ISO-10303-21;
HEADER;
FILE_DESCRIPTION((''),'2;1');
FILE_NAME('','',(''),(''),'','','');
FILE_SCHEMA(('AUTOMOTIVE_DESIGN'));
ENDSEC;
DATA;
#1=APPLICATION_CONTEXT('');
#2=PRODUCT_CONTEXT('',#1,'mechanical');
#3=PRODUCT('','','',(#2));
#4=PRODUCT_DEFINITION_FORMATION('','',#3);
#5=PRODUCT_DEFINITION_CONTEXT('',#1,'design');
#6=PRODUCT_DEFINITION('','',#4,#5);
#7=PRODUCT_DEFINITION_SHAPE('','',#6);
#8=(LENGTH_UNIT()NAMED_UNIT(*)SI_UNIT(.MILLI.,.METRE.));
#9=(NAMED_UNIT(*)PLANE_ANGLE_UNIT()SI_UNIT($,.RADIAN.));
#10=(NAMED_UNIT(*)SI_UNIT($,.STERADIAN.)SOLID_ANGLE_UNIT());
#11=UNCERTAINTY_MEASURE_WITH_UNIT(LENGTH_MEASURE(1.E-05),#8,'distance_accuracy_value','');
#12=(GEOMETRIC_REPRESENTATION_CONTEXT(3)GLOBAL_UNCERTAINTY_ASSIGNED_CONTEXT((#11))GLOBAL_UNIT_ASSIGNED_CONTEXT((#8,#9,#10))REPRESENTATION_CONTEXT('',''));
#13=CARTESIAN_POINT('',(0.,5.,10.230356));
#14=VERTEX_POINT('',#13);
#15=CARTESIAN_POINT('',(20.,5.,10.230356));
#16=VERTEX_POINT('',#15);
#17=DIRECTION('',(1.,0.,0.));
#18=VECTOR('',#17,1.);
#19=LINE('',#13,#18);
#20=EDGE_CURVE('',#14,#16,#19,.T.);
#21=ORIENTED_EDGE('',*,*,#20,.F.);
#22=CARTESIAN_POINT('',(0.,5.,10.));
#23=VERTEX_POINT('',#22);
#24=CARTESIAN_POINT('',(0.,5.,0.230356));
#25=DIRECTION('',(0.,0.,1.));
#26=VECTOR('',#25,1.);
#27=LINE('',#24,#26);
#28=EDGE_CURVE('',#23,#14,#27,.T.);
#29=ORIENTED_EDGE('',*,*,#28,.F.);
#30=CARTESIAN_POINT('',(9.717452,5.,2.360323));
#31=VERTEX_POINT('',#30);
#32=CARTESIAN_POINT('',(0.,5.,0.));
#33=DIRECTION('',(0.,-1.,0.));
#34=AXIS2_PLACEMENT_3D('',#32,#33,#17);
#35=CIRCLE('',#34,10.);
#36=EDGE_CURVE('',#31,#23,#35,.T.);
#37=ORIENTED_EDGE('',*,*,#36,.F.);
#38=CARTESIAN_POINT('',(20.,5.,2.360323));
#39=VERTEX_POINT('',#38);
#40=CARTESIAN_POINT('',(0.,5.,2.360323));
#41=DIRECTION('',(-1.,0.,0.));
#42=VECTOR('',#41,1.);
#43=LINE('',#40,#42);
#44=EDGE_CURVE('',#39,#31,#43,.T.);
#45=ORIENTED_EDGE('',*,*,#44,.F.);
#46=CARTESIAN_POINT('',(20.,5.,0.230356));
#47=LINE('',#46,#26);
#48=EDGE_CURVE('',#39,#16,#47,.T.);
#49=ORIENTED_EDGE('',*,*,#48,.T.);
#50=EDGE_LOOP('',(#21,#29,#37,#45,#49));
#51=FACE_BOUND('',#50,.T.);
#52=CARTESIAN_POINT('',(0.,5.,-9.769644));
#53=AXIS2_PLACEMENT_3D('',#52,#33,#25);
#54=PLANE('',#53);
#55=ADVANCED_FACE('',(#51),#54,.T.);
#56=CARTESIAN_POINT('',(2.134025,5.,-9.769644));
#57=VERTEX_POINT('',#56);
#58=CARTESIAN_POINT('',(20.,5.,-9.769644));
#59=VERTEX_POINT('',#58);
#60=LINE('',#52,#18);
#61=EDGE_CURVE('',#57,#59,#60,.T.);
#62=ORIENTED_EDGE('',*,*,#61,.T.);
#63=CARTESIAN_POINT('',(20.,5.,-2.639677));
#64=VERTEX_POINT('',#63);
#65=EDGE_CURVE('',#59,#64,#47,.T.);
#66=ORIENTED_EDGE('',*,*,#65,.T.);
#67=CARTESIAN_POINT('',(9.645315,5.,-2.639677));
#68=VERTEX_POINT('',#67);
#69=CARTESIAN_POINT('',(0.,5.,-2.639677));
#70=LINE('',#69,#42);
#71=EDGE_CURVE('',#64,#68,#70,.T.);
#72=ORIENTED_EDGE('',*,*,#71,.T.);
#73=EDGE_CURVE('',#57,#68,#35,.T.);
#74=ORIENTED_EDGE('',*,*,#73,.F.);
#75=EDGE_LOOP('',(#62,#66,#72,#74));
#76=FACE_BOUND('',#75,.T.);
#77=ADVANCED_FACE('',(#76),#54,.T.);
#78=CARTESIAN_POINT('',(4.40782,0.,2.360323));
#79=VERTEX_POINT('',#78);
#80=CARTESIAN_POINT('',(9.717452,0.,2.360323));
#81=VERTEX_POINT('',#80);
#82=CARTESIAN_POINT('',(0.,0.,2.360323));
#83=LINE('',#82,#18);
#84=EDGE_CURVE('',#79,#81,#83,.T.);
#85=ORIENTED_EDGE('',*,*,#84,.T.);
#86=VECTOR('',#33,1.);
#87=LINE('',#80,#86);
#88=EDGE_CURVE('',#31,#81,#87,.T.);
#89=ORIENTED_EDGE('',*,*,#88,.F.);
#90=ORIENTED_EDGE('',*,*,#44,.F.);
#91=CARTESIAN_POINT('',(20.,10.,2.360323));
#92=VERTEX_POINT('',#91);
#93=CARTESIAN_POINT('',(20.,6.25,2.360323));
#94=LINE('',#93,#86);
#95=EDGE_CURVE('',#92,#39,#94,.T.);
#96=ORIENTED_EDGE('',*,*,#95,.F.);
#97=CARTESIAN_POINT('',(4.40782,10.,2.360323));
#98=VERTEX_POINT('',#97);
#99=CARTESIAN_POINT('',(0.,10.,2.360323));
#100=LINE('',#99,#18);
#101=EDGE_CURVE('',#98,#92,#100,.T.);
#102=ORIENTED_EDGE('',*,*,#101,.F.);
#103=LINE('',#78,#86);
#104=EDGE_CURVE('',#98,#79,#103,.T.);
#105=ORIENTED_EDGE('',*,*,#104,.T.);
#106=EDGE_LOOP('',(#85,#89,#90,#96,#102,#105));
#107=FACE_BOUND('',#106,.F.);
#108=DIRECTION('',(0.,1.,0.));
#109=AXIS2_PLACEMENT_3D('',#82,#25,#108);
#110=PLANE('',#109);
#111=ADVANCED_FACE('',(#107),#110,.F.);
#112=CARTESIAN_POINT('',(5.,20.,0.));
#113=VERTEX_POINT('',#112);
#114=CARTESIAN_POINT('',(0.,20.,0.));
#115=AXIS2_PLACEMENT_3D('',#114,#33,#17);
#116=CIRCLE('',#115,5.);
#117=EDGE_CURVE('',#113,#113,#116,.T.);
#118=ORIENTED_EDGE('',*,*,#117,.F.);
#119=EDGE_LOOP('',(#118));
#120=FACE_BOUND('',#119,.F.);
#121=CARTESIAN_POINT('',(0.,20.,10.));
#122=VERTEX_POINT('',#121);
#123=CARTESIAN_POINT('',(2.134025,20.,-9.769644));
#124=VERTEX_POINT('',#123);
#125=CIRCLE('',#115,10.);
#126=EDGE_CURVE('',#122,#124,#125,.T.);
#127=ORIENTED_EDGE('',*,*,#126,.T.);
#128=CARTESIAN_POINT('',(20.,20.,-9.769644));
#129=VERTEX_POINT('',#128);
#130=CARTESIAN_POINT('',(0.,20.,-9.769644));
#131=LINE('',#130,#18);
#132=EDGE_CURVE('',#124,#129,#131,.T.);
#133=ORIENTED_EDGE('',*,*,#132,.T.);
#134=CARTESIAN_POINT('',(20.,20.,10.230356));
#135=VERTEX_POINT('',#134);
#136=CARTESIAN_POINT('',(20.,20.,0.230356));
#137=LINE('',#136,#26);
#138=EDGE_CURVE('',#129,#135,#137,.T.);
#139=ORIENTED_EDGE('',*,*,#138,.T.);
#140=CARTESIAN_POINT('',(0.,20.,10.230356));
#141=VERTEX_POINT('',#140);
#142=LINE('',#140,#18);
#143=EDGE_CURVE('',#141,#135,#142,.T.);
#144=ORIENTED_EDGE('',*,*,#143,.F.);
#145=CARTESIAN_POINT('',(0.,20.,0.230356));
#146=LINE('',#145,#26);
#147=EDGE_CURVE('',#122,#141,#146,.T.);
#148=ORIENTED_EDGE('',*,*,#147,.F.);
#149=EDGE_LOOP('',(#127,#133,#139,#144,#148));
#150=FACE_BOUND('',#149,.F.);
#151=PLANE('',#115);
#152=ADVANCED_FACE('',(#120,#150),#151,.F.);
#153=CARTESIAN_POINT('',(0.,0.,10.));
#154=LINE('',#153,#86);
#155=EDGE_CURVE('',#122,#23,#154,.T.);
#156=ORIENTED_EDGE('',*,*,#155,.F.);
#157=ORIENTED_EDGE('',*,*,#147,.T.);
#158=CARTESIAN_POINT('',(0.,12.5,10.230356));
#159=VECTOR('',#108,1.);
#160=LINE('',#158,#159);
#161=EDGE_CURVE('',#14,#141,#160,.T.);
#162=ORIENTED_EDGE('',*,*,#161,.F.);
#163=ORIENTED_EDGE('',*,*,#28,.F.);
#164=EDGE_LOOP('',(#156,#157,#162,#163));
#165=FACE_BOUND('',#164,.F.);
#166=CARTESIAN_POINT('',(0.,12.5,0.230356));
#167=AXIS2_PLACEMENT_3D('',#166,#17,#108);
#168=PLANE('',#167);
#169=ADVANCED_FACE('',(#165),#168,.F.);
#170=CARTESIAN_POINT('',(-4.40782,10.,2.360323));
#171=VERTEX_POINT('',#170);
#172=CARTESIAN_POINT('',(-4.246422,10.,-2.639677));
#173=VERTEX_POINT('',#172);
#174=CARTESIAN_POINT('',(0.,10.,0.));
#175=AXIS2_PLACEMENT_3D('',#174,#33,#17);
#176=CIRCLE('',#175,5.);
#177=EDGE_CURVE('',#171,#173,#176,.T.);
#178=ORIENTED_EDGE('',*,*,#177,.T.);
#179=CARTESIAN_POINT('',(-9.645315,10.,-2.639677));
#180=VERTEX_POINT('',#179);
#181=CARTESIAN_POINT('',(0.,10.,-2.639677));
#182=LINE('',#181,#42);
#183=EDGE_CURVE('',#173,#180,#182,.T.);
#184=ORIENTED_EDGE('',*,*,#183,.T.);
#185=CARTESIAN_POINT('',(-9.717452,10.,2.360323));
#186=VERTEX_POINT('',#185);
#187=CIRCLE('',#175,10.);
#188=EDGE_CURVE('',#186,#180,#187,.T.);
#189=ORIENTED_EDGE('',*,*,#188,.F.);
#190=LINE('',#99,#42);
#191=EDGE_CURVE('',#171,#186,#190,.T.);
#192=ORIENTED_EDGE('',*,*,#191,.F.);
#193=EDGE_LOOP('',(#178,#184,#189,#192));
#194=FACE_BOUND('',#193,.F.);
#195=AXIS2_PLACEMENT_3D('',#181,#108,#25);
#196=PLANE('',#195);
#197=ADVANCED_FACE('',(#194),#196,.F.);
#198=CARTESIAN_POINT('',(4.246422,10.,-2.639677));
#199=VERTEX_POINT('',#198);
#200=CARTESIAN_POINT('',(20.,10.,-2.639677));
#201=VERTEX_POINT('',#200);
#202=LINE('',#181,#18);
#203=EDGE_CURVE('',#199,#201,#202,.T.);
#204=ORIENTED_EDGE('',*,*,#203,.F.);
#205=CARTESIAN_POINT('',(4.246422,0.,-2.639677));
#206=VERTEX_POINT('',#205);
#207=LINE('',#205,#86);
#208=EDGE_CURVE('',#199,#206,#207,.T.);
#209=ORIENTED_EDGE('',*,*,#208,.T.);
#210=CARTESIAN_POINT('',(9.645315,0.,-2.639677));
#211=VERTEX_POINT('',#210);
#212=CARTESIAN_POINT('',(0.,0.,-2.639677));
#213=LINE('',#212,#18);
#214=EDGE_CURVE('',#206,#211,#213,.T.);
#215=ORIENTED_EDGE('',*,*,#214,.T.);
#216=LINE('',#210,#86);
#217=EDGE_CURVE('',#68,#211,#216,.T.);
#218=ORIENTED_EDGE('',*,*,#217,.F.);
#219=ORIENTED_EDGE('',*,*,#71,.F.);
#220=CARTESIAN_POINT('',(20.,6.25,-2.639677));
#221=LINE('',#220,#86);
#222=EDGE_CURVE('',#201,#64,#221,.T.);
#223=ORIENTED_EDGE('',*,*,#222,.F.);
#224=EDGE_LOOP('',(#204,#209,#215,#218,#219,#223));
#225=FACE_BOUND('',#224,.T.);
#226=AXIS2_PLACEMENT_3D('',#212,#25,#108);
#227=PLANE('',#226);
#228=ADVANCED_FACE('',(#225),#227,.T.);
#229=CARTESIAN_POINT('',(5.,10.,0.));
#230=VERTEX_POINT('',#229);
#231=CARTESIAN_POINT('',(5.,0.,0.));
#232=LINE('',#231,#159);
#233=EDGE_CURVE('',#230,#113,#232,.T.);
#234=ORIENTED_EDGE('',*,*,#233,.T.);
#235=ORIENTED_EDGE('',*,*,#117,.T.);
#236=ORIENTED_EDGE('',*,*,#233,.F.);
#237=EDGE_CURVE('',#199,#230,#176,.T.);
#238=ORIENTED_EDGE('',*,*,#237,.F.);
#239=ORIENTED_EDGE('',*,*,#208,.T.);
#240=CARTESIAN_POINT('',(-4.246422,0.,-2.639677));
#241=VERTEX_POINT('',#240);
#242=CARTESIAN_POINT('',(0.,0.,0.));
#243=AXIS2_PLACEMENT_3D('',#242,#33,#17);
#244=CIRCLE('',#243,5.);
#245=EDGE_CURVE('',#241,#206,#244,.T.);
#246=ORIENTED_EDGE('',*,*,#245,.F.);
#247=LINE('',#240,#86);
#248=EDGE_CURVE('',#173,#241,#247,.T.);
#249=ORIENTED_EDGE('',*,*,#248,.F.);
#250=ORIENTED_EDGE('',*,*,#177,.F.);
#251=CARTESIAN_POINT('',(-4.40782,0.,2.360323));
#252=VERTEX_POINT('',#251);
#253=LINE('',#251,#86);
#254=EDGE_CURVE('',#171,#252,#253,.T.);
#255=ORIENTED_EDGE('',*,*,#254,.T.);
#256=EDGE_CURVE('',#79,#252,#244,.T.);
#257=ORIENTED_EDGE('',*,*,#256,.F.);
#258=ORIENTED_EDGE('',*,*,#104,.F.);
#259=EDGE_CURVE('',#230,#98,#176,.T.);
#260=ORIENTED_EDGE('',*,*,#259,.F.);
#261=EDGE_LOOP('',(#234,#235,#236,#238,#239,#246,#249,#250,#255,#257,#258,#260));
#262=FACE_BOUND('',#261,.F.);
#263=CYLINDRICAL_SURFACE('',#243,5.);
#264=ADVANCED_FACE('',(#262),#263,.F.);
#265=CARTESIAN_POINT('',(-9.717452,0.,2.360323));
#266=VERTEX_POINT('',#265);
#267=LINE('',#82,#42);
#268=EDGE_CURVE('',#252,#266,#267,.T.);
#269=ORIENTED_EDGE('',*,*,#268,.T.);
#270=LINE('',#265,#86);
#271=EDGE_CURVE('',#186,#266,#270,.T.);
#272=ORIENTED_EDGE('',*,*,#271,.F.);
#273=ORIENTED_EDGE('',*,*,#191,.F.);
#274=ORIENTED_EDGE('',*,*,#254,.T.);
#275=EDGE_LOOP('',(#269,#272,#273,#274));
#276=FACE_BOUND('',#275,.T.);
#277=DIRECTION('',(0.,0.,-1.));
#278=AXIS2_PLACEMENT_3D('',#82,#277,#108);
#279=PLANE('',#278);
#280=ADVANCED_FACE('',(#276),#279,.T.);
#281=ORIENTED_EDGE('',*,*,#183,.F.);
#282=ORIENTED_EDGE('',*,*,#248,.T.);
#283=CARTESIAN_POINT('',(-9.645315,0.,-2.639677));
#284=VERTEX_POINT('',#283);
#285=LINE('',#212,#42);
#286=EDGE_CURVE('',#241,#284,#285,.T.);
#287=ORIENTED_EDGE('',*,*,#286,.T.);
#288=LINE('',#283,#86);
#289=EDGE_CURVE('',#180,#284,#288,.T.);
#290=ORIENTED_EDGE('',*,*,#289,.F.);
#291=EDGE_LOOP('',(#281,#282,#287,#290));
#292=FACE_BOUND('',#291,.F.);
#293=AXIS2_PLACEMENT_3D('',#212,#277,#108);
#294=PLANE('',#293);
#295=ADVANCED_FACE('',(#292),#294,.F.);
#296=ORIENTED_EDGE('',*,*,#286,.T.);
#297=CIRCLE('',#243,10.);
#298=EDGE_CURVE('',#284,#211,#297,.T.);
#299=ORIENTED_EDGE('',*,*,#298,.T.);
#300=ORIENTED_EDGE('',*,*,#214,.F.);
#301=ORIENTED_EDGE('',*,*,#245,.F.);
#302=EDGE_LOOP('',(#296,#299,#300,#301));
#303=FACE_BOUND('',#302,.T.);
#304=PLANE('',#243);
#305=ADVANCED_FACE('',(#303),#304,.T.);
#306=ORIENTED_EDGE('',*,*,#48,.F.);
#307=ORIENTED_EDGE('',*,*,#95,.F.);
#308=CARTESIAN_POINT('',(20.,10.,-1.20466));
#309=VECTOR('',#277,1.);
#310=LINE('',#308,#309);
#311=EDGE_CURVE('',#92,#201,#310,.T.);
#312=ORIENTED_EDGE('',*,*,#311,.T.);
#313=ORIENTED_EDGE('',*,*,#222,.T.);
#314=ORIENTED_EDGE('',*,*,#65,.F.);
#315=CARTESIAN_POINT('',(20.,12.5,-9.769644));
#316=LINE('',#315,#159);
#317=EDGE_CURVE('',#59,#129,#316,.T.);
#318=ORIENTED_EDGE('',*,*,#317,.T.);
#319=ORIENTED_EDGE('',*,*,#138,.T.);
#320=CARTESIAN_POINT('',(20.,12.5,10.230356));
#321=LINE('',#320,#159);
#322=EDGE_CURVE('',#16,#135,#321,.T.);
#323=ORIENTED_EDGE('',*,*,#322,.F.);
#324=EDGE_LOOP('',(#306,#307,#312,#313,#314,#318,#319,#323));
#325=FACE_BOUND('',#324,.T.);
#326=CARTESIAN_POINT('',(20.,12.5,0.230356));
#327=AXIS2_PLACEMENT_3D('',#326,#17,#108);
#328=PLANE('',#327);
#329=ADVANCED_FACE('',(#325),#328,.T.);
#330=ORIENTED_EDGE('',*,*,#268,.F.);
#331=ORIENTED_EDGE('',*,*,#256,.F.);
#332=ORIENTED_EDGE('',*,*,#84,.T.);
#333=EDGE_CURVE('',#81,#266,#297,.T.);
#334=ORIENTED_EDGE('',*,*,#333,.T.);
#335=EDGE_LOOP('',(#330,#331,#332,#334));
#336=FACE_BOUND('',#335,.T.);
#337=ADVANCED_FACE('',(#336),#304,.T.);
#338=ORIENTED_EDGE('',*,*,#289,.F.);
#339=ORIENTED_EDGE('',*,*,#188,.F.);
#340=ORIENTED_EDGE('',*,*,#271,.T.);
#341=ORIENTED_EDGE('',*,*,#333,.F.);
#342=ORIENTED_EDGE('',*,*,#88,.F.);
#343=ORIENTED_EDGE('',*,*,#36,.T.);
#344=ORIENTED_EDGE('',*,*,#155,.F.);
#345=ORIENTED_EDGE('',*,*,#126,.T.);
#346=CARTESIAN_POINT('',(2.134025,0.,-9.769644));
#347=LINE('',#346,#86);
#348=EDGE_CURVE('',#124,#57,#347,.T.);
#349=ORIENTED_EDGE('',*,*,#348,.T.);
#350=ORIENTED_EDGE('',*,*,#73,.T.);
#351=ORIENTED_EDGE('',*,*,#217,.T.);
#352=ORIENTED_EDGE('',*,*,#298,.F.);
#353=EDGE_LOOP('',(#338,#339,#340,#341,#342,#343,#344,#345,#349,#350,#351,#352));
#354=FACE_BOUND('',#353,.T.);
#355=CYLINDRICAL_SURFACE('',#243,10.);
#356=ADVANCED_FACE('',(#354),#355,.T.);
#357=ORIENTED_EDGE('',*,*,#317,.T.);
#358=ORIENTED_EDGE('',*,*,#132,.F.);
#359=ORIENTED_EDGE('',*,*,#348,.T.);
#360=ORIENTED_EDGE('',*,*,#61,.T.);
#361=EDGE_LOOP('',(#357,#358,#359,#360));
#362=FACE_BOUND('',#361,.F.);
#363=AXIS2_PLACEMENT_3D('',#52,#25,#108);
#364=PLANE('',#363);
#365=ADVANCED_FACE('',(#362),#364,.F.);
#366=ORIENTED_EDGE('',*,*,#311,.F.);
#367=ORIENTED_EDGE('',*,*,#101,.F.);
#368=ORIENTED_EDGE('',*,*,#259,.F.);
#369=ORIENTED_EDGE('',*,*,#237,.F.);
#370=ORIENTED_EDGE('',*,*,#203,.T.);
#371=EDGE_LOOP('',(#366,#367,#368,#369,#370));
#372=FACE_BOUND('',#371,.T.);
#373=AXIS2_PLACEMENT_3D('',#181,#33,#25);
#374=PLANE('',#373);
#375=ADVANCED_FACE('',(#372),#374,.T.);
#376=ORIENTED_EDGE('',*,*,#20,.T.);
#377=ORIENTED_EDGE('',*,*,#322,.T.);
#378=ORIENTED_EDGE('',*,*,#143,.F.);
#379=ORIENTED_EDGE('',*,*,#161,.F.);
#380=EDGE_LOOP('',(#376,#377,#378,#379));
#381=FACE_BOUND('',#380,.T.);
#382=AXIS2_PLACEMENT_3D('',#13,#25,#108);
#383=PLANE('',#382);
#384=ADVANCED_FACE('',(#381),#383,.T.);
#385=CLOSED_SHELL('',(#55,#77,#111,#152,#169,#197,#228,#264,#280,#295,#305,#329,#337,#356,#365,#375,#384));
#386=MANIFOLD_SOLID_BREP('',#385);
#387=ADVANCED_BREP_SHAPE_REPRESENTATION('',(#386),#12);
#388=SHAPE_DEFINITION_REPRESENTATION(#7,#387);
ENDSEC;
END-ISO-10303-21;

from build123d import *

# Parameters (mm, degrees)
F0_R          = 10
F0_R_2        = 5
F1_DEPTH      = 20
F2_W          = 15
F2_H          = 20
F3_DEPTH      = 20
F4_R          = 5
F5_DEPTH      = 20.001
F6_W          = 10
F6_H          = 5
F7_DEPTH      = 10.001
F7_DEPTH_BACK = 20.001


with BuildPart() as f1:
    # F0 (on Front) → F1 (new body)
    with BuildSketch(Plane.XZ):
        Circle(F0_R)
        Circle(F0_R_2, mode=Mode.SUBTRACT)
    extrude(amount=-F1_DEPTH)

    # F2 (on Right) → F3 (join)
    with BuildSketch(Plane.YZ):
        with Locations((12.5, 0.2303563431)):
            Rectangle(F2_W, F2_H)
    extrude(amount=F3_DEPTH)

    # F4 (on Front) → F5 (cut, through all)
    with BuildSketch(Plane.XZ):
        Circle(F4_R)
    extrude(amount=-F5_DEPTH, mode=Mode.SUBTRACT)

    # F6 (on Right) → F7 (cut, two sides)
    with BuildSketch(Plane.YZ) as f7_sk:
        with Locations((5, -0.1396772545)):
            Rectangle(F6_W, F6_H)
    extrude(amount=-F7_DEPTH, mode=Mode.SUBTRACT)
    extrude(f7_sk.sketch, amount=F7_DEPTH_BACK, mode=Mode.SUBTRACT)


solid = f1.part
